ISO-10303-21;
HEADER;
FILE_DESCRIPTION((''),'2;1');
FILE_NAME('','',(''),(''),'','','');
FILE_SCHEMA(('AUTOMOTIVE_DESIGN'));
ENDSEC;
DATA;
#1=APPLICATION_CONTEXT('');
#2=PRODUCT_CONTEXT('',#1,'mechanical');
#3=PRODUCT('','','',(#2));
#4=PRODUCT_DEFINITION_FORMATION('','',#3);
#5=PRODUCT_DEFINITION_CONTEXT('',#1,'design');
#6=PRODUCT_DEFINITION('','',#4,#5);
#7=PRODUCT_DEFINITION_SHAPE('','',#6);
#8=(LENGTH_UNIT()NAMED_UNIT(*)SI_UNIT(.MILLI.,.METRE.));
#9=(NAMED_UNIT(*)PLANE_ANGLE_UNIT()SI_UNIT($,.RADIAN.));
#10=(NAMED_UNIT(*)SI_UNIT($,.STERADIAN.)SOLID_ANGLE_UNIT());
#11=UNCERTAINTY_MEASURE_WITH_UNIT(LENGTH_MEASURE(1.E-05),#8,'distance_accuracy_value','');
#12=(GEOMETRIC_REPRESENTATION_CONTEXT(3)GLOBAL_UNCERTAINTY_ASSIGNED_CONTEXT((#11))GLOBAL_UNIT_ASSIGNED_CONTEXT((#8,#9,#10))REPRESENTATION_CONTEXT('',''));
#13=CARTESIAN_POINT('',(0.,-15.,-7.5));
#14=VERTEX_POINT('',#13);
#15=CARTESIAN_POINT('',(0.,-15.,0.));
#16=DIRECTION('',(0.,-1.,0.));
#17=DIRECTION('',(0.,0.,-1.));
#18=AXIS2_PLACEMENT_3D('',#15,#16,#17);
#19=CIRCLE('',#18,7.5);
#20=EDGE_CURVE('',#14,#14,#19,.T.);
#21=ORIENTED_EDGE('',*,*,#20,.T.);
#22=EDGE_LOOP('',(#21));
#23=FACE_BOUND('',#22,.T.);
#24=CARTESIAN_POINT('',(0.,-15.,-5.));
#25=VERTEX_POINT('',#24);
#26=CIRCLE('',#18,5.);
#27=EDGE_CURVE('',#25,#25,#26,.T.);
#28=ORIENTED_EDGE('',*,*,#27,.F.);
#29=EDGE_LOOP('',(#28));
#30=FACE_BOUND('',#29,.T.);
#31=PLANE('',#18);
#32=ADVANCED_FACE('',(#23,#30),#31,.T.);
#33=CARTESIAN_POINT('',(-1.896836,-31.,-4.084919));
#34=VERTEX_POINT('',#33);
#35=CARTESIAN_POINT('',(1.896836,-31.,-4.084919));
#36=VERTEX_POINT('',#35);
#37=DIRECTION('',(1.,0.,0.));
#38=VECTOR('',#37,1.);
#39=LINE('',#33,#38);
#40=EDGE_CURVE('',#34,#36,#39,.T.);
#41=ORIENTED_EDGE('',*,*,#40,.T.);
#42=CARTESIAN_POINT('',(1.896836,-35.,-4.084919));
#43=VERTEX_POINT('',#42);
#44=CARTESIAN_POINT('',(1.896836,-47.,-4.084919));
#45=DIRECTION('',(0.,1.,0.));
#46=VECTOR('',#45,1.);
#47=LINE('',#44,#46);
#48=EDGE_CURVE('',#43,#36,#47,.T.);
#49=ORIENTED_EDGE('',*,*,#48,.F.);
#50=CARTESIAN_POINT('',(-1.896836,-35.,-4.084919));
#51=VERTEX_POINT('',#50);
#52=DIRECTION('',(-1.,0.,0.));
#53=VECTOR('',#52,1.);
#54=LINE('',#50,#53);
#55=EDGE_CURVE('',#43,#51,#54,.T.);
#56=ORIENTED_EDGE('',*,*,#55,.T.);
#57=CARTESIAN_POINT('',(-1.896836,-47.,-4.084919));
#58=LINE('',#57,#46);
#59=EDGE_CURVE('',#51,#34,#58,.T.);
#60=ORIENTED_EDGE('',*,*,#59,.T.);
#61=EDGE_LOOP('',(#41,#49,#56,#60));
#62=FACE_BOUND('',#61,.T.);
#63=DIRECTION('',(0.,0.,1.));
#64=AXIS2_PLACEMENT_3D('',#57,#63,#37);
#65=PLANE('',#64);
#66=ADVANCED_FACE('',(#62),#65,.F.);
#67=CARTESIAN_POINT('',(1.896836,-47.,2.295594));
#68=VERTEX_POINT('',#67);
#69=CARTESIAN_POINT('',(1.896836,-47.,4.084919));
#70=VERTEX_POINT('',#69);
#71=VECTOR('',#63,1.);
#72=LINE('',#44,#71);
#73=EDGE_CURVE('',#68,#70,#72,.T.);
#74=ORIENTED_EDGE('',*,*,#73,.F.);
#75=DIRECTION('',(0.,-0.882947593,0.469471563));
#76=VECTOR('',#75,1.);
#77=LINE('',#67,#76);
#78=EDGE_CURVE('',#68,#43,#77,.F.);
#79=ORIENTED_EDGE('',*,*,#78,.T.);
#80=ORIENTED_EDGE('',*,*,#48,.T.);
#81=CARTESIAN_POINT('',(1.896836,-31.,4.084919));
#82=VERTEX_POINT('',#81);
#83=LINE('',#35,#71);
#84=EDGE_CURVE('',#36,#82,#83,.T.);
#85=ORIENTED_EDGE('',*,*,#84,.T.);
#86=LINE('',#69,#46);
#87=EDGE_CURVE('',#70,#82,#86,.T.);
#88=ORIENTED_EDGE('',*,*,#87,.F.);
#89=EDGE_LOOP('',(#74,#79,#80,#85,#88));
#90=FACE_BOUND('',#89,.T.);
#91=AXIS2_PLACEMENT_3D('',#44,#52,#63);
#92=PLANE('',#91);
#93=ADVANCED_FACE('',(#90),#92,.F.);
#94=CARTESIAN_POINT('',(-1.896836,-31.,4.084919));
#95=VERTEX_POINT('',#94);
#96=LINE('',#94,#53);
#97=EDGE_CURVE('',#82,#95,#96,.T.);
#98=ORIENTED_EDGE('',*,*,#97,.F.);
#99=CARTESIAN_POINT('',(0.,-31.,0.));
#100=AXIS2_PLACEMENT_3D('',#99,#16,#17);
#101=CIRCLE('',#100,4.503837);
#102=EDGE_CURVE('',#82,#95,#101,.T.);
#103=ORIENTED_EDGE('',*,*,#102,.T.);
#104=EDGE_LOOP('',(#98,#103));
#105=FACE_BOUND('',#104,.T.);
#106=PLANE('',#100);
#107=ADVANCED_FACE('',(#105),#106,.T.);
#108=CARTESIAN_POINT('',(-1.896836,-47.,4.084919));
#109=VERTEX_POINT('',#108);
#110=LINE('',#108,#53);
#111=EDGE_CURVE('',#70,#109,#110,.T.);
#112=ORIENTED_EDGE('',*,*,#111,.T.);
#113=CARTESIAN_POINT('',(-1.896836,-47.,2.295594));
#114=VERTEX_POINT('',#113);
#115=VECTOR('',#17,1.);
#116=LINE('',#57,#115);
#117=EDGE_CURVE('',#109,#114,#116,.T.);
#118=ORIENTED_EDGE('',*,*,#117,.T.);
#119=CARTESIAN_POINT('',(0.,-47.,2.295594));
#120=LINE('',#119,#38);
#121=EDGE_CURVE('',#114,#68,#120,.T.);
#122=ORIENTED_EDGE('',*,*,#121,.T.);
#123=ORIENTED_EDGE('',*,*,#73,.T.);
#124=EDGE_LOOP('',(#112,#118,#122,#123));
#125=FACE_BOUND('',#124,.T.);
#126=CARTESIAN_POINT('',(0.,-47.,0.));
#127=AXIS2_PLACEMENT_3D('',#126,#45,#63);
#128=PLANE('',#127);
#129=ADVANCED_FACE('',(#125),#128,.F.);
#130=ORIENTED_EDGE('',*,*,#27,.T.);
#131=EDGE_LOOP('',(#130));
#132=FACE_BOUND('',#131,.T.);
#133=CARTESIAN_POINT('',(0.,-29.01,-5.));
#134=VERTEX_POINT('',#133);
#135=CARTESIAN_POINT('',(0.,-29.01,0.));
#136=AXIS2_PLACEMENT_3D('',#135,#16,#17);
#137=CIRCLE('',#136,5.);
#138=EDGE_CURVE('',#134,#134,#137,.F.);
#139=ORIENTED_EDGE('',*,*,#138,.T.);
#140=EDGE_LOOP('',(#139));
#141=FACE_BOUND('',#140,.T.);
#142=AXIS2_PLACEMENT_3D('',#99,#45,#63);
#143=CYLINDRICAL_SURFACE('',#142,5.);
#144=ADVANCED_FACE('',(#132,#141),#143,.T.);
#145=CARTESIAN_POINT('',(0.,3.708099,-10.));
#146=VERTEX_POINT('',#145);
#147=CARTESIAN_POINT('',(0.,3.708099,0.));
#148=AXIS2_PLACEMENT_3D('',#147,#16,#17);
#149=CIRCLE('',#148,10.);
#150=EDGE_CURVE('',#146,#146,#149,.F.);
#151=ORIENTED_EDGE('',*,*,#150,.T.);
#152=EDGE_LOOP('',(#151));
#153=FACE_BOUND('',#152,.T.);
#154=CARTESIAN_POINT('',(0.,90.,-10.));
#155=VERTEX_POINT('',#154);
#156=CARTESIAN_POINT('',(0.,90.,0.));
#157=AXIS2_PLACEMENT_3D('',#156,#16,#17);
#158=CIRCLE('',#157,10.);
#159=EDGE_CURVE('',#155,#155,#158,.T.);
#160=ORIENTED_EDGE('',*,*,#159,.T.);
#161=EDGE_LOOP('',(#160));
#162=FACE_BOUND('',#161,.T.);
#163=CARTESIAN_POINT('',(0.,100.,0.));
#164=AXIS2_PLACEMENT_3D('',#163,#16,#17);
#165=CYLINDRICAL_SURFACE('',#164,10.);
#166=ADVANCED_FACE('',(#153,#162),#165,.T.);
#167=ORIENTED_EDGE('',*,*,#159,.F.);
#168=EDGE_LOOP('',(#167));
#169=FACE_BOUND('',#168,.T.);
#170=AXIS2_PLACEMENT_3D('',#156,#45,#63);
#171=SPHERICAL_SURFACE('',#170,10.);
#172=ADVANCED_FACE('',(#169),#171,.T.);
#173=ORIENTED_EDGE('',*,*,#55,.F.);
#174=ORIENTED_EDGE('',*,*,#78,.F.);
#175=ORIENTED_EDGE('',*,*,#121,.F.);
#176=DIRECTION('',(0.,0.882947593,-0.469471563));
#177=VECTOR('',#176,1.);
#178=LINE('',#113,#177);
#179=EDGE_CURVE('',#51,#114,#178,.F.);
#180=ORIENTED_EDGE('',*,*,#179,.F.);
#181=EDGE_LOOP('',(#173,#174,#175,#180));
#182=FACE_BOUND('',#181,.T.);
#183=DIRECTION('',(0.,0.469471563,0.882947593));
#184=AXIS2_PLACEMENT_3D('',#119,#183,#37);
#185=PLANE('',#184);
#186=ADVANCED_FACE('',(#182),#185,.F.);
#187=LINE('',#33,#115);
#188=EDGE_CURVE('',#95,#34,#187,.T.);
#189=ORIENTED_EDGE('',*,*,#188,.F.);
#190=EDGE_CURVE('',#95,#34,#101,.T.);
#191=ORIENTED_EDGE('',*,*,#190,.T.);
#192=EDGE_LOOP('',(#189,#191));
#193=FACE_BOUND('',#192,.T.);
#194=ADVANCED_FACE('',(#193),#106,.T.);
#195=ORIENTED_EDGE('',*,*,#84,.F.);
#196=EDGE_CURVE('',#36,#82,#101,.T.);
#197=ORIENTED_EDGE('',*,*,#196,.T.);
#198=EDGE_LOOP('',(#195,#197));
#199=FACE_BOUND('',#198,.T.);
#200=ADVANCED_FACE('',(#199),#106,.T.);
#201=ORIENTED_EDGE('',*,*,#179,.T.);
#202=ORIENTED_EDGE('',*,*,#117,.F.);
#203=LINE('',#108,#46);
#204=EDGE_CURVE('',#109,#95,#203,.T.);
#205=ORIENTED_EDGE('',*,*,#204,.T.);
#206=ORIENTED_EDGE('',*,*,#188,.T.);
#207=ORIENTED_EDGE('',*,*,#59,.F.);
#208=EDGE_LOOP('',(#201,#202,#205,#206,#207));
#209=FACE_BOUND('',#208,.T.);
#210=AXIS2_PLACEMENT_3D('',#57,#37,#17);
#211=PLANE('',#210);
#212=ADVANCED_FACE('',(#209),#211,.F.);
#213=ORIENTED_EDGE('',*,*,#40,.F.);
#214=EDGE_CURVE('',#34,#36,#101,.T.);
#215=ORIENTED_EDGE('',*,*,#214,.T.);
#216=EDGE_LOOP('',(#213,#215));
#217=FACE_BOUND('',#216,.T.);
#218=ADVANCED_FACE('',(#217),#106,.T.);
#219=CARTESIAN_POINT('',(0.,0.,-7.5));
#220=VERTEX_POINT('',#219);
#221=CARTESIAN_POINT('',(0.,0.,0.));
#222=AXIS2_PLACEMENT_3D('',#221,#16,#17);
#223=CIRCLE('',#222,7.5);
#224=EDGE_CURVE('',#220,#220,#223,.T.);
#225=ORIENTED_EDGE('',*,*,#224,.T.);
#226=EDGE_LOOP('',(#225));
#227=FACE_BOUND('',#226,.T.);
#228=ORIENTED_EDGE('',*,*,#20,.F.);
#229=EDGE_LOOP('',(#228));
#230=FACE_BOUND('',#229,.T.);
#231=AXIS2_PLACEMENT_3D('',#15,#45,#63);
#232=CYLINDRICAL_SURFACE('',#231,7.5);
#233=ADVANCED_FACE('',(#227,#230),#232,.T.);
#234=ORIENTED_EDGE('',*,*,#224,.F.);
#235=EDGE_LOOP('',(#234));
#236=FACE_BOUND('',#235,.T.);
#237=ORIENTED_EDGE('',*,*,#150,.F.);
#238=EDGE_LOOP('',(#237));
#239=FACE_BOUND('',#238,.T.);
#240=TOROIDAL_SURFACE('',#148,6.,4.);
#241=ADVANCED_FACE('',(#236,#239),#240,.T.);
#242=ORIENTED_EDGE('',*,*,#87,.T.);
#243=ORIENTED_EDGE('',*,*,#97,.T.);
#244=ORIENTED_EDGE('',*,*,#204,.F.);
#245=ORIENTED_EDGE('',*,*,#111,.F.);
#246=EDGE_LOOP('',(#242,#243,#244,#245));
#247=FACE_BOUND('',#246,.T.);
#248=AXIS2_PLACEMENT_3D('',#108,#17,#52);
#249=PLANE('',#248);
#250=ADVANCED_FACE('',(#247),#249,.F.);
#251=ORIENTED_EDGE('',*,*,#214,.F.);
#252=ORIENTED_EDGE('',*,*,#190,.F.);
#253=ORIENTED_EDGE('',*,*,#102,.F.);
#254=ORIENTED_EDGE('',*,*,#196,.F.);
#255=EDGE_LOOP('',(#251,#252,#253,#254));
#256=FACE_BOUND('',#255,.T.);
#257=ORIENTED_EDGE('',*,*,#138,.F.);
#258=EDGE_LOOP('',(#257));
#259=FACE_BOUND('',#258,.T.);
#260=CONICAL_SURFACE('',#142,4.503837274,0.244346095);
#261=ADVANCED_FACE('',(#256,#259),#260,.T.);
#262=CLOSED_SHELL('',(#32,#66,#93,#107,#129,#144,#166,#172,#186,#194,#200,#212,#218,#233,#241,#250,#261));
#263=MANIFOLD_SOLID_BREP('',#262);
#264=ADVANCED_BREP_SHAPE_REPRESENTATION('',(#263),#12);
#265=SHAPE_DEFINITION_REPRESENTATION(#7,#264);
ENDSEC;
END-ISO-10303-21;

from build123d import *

# Parameters (mm, degrees)
CROQUIS1_R              = 10
SALIENTE_EXTRUIR1_DEPTH = 100
CROQUIS2_R              = 7.5
SALIENTE_EXTRUIR2_DEPTH = 15
CROQUIS3_R              = 5
SALIENTE_EXTRUIR3_DEPTH = 16
REDONDEO1_R             = 4
CHAFL_N1_SIZE           = 1.99
CHAFL_N1_SIZE2          = 0.496162726
CROQUIS4_W              = 3.793672416
CROQUIS4_H              = 8.169837842
SALIENTE_EXTRUIR4_DEPTH = 16
CHAFL_N2_SIZE           = 12
CHAFL_N2_SIZE2          = 6.38051318
REDONDEO2_R             = 10


with BuildPart() as part:
    # Croquis1 → Saliente-Extruir1 (new body)
    with BuildSketch(Plane(origin=(0, 0, 0), x_dir=(1, 0, 0), z_dir=(0, 1, 0))):
        with Locations(Location((0, 0, 0), (0, 0, 270))):
            Circle(CROQUIS1_R)
    extrude(amount=SALIENTE_EXTRUIR1_DEPTH)

    # Croquis2 → Saliente-Extruir2 (add)
    with BuildSketch(Plane.XZ):
        with Locations(Location((0, 0, 0), (0, 0, 270))):
            Circle(CROQUIS2_R)
    extrude(amount=SALIENTE_EXTRUIR2_DEPTH)

    # Croquis3 → Saliente-Extruir3 (add)
    with BuildSketch(Plane.XZ.offset(15)):
        with Locations(Location((0, 0, 0), (0, 0, 270))):
            Circle(CROQUIS3_R)
    extrude(amount=SALIENTE_EXTRUIR3_DEPTH)

    # Redondeo1
    # the kernel refuses this fillet: 4 mm, written as the material it takes off along each edge
    with BuildSketch(Plane(origin=(0, 0, 0), x_dir=(0, 0, 1), z_dir=(-1, 0, 0))) as redondeo1_piece_1:
        with BuildLine():
            CenterArc((6, 3.708099244), REDONDEO1_R, 292.024312837, 67.975687163)
            Line((7.5, 0), (7.53, -0.074161985))
            ThreePointArc((7.53, -0.074161985), (8.75, -0.08), (10, -0.08))
            Line((10, -0.08), (10.08, 0))
            Line((10.08, 0), (10.08, 3.708099244))
            Line((10.08, 3.708099244), (10, 3.708099244))
        make_face()
    revolve(axis=Axis((0, 0, 0), (0, 1, 0)), mode=Mode.SUBTRACT)

    # Chaflán1
    chafl_n1_edges = [part.edges().sort_by_distance(p)[0] for p in [
        (0, -31, 5),
    ]]
    chafl_n1_side = [part.faces().sort_by_distance(p)[0] for p in [
        (0, -23, 5),
    ]]
    chamfer(chafl_n1_edges, length=CHAFL_N1_SIZE, length2=CHAFL_N1_SIZE2, reference=chafl_n1_side[0])

    # Croquis4 → Saliente-Extruir4 (add)
    with BuildSketch(Plane.XZ.offset(31)):
        Rectangle(CROQUIS4_W, CROQUIS4_H)
    extrude(amount=SALIENTE_EXTRUIR4_DEPTH)

    # Chaflán2
    chafl_n2_edges = [part.edges().sort_by_distance(p)[0] for p in [
        (0, -47, -4.084918921),
    ]]
    chafl_n2_side = [part.faces().sort_by_distance(p)[0] for p in [
        (0, -39, -4.084918921),
    ]]
    chamfer(chafl_n2_edges, length=CHAFL_N2_SIZE, length2=CHAFL_N2_SIZE2, reference=chafl_n2_side[0])

    # Redondeo2
    redondeo2_edges = [part.edges().sort_by_distance(p)[0] for p in [
        (0, 100, -10),
    ]]
    fillet(redondeo2_edges, radius=REDONDEO2_R)


solid = part.part
